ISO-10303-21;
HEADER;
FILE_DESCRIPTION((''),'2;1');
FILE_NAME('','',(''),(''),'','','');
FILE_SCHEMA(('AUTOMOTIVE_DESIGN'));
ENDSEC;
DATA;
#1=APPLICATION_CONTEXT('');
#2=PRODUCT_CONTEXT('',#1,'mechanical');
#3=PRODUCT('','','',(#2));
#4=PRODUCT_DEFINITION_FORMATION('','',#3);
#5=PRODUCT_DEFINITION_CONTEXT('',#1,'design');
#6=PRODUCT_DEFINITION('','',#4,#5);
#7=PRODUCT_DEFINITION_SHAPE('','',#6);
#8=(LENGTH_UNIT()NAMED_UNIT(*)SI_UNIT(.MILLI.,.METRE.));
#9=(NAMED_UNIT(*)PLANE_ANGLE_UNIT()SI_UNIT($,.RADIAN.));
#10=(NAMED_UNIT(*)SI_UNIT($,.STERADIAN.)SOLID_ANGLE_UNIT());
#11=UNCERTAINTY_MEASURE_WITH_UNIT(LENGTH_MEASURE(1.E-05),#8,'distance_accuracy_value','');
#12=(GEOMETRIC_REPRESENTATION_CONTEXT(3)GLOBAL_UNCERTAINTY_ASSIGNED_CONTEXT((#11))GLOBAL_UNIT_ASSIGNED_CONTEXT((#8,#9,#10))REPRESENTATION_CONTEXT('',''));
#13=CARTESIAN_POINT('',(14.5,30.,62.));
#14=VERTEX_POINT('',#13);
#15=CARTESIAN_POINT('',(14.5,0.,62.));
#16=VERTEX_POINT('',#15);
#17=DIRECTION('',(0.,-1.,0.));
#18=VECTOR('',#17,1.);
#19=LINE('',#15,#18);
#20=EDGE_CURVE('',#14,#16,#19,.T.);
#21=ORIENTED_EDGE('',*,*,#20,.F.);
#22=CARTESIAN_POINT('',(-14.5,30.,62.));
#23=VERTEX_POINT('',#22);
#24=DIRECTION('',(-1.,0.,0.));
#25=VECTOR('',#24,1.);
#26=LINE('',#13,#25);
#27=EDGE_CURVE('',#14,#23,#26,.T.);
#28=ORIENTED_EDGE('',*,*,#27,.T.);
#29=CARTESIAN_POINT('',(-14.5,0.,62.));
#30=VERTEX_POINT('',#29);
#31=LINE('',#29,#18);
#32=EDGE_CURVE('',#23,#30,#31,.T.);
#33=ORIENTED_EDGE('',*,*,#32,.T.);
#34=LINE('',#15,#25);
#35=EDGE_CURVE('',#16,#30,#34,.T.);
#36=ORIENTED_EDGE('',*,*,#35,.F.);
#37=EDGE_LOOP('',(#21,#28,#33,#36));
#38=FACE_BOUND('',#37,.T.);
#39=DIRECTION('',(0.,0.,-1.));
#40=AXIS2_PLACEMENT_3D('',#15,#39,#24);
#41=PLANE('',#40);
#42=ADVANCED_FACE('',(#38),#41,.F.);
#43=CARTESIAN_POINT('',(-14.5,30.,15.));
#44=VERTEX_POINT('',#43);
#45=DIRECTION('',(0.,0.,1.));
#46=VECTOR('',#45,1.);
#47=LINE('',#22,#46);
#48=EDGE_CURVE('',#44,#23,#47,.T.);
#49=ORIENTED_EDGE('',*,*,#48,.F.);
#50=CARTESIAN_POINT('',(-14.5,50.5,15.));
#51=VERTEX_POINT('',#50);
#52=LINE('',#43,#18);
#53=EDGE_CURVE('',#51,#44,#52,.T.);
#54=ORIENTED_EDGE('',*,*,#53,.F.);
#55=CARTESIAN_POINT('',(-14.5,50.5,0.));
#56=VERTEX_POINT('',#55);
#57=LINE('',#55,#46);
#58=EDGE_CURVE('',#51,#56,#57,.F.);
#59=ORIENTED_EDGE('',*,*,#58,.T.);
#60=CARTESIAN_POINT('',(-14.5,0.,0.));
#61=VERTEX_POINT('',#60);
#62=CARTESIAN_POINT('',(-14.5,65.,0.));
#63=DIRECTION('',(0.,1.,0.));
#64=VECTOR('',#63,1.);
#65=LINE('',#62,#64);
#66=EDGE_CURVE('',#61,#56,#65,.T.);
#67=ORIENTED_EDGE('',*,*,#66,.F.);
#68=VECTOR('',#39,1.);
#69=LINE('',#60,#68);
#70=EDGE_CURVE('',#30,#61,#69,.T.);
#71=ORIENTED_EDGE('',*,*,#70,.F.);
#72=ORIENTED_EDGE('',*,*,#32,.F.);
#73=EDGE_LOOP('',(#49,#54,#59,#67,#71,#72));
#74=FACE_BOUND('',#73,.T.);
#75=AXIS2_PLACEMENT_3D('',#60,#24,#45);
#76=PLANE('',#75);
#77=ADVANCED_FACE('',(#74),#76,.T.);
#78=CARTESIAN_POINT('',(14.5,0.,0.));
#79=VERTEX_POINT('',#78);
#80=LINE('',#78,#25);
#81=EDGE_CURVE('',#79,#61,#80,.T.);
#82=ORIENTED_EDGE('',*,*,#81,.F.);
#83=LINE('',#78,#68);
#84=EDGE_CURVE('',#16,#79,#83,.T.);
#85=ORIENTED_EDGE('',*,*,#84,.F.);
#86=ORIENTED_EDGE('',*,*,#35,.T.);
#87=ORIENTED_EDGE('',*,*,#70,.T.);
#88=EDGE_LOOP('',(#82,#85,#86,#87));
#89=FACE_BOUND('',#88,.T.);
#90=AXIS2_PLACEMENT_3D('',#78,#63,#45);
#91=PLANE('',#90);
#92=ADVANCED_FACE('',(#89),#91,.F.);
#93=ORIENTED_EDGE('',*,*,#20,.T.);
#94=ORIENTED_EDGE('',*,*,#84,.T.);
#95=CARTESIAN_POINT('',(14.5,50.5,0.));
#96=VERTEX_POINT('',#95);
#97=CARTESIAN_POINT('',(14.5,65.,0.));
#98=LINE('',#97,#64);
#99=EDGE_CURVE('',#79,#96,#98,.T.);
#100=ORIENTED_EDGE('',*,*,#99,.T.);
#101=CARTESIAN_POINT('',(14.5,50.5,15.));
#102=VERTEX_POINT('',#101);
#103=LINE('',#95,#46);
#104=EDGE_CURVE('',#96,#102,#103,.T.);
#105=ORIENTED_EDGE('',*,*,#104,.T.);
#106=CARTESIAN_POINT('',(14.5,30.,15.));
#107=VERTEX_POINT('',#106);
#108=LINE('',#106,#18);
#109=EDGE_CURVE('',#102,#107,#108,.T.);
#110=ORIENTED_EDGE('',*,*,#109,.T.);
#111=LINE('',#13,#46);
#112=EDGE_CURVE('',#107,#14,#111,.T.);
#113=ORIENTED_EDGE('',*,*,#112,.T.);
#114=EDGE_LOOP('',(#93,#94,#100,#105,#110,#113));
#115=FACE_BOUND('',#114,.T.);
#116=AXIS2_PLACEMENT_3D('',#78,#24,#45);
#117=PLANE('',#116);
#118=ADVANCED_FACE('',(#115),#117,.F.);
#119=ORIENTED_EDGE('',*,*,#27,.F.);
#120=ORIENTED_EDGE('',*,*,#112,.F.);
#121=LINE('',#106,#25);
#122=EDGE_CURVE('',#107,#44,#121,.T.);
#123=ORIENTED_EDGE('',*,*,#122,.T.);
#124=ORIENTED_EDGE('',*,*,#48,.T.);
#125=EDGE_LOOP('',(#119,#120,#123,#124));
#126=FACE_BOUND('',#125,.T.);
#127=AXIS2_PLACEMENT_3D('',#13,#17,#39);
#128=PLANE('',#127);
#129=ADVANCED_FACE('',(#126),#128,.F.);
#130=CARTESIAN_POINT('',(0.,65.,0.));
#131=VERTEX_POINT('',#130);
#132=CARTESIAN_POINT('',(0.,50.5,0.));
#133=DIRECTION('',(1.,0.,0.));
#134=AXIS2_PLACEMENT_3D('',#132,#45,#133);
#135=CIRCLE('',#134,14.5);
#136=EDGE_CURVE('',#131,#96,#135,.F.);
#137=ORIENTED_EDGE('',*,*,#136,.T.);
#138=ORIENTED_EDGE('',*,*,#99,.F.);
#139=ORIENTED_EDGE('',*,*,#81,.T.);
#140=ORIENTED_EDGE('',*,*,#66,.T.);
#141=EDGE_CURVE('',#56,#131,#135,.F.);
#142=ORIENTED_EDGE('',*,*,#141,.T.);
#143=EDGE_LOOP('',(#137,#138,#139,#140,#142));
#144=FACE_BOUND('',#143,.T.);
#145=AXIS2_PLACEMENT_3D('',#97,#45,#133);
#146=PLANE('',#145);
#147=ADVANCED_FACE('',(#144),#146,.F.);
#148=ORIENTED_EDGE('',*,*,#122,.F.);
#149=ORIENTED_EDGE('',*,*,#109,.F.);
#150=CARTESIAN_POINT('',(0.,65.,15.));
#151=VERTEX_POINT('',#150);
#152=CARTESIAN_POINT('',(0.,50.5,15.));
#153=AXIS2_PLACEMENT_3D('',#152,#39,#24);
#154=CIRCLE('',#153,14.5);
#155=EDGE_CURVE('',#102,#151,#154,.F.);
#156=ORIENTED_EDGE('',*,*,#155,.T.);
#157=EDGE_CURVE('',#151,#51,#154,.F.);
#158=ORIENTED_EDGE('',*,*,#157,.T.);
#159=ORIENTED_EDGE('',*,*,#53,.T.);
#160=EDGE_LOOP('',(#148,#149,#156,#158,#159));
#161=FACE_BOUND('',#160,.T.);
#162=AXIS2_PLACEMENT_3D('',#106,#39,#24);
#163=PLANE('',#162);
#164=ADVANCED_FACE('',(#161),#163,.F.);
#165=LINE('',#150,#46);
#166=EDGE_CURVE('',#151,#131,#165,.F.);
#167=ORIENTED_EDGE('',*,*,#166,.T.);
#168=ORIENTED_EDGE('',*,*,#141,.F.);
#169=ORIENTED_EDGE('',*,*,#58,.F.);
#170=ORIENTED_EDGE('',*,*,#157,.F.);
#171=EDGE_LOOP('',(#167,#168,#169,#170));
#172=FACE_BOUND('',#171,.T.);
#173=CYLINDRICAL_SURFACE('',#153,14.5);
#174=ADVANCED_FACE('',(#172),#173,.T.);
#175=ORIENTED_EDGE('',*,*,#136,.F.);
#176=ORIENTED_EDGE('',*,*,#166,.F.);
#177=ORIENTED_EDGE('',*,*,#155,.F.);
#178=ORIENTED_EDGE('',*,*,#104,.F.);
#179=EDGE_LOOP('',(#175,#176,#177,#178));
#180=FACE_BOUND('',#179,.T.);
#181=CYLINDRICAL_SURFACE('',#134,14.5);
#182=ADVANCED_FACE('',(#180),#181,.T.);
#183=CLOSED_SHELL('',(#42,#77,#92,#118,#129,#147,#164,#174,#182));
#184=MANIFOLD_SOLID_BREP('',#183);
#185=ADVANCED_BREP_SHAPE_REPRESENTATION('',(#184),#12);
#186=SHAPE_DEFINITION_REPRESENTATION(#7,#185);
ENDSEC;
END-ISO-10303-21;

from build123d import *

# Parameters (mm, degrees)
BOSS_EXTRUDE1_DEPTH = 14.5
FILLET2_R           = 14.5


with BuildPart() as part:
    # Sketch1 → Boss-Extrude1 (new, symmetric)
    with BuildSketch(Plane.YZ):
        Polygon((0, 0), (0, 62), (30, 62), (30, 15), (65, 15), (65, 0), align=None)
    extrude(amount=BOSS_EXTRUDE1_DEPTH, both=True)

    # Fillet2
    fillet2_edges = [part.edges().sort_by_distance(p)[0] for p in [
        (-14.5, 65, 7.5),
        (14.5, 65, 7.5),
    ]]
    fillet(fillet2_edges, radius=FILLET2_R - 0.0001)  # a hair under: the kernel refuses the full size


solid = part.part
